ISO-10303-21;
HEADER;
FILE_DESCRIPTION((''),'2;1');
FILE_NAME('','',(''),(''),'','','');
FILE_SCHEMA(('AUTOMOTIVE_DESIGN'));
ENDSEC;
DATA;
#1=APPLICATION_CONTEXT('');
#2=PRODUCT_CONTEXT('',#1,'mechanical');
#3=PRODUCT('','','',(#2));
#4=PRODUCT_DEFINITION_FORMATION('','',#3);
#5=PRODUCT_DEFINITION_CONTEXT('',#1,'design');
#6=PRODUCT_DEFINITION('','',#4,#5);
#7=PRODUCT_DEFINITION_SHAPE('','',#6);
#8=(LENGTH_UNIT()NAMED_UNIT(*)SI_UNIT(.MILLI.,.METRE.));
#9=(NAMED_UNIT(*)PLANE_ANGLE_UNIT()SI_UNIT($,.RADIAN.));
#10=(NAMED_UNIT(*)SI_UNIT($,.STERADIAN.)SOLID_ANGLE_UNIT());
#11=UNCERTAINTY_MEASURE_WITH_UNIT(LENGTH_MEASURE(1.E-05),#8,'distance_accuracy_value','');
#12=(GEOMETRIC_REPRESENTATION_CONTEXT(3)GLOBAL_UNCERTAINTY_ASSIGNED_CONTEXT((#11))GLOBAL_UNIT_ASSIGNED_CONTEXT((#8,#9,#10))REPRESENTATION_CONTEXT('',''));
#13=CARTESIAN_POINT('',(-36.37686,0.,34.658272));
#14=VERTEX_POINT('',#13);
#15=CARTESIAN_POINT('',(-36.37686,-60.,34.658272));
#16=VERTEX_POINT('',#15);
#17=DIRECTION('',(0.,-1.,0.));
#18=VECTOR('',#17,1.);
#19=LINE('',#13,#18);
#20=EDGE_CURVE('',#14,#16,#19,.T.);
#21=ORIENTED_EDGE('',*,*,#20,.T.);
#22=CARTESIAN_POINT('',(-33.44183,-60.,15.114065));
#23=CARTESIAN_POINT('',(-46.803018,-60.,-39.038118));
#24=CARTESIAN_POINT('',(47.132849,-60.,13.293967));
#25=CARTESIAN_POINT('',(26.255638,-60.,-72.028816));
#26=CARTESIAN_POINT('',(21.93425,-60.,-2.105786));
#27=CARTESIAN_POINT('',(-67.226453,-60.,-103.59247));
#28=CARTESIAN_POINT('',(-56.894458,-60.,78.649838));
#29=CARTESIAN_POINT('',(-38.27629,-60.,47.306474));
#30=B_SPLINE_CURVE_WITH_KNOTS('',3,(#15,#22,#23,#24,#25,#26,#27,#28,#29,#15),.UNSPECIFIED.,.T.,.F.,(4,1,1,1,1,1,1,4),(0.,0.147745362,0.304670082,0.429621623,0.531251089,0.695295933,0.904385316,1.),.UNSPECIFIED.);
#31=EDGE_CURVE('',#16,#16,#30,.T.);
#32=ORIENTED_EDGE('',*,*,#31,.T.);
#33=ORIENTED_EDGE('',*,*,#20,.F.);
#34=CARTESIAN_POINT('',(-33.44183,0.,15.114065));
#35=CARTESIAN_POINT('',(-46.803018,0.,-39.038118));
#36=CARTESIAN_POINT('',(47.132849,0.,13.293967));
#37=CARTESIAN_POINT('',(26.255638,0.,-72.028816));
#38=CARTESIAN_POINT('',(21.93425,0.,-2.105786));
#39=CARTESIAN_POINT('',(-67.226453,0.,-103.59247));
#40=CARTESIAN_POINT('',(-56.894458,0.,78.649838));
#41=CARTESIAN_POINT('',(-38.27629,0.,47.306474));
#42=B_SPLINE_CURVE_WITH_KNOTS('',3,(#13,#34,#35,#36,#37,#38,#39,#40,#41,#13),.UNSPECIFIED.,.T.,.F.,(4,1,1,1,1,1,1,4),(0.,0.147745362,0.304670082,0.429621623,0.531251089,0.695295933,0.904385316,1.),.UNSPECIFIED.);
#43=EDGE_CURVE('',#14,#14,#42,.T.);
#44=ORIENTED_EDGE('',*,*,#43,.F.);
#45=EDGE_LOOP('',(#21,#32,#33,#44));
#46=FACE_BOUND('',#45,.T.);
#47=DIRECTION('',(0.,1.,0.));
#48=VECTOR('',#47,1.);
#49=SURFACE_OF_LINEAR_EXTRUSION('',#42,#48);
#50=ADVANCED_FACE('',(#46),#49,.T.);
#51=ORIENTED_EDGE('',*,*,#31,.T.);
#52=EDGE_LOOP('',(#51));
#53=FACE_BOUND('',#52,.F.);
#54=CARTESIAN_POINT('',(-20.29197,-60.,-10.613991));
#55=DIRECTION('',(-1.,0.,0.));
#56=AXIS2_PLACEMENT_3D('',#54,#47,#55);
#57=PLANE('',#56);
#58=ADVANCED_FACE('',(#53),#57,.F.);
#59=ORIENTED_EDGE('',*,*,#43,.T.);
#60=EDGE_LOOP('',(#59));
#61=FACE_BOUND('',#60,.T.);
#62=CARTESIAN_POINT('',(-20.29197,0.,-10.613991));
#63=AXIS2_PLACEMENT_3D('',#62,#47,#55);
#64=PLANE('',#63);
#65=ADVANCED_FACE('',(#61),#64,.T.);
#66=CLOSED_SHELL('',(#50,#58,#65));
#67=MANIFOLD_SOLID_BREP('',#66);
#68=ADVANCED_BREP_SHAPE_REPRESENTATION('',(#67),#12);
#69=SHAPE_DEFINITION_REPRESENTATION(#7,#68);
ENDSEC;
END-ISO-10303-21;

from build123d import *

# Parameters (mm, degrees)
F1_DEPTH = 60


# Not quite as in the source:
# - a feature of the source that left no trace in its solid (it failed there, or was rolled back) is left out
# - the program builds the solid bodies; features that only make, move or delete a surface that nothing else refers to are left out


with BuildPart() as f1:
    # F0 (on Front) → F1 (new body)
    with BuildSketch(Plane.XZ):
        with BuildLine():
            add(Edge.make_bspline(
                [(-36.3768599927, 34.6582718194), (-33.4418297724, 15.1140646105), (-46.8030180002, -39.0381180133), (47.1328492094, 13.2939671139), (26.2556378301, -72.0288161706), (21.934250444, -2.1057858824), (-67.2264525261, -103.5924696147), (-56.8944583898, 78.6498378435), (-38.2762900885, 47.3064739102), (-36.3768599927, 34.6582718194)],
                knots=[0, 0, 0, 0, 0.1477453621, 0.3046700823, 0.4296216232, 0.531251089, 0.6952959326, 0.9043853159, 1, 1, 1, 1], degree=3))
        make_face()
    extrude(amount=F1_DEPTH)


solid = f1.part
